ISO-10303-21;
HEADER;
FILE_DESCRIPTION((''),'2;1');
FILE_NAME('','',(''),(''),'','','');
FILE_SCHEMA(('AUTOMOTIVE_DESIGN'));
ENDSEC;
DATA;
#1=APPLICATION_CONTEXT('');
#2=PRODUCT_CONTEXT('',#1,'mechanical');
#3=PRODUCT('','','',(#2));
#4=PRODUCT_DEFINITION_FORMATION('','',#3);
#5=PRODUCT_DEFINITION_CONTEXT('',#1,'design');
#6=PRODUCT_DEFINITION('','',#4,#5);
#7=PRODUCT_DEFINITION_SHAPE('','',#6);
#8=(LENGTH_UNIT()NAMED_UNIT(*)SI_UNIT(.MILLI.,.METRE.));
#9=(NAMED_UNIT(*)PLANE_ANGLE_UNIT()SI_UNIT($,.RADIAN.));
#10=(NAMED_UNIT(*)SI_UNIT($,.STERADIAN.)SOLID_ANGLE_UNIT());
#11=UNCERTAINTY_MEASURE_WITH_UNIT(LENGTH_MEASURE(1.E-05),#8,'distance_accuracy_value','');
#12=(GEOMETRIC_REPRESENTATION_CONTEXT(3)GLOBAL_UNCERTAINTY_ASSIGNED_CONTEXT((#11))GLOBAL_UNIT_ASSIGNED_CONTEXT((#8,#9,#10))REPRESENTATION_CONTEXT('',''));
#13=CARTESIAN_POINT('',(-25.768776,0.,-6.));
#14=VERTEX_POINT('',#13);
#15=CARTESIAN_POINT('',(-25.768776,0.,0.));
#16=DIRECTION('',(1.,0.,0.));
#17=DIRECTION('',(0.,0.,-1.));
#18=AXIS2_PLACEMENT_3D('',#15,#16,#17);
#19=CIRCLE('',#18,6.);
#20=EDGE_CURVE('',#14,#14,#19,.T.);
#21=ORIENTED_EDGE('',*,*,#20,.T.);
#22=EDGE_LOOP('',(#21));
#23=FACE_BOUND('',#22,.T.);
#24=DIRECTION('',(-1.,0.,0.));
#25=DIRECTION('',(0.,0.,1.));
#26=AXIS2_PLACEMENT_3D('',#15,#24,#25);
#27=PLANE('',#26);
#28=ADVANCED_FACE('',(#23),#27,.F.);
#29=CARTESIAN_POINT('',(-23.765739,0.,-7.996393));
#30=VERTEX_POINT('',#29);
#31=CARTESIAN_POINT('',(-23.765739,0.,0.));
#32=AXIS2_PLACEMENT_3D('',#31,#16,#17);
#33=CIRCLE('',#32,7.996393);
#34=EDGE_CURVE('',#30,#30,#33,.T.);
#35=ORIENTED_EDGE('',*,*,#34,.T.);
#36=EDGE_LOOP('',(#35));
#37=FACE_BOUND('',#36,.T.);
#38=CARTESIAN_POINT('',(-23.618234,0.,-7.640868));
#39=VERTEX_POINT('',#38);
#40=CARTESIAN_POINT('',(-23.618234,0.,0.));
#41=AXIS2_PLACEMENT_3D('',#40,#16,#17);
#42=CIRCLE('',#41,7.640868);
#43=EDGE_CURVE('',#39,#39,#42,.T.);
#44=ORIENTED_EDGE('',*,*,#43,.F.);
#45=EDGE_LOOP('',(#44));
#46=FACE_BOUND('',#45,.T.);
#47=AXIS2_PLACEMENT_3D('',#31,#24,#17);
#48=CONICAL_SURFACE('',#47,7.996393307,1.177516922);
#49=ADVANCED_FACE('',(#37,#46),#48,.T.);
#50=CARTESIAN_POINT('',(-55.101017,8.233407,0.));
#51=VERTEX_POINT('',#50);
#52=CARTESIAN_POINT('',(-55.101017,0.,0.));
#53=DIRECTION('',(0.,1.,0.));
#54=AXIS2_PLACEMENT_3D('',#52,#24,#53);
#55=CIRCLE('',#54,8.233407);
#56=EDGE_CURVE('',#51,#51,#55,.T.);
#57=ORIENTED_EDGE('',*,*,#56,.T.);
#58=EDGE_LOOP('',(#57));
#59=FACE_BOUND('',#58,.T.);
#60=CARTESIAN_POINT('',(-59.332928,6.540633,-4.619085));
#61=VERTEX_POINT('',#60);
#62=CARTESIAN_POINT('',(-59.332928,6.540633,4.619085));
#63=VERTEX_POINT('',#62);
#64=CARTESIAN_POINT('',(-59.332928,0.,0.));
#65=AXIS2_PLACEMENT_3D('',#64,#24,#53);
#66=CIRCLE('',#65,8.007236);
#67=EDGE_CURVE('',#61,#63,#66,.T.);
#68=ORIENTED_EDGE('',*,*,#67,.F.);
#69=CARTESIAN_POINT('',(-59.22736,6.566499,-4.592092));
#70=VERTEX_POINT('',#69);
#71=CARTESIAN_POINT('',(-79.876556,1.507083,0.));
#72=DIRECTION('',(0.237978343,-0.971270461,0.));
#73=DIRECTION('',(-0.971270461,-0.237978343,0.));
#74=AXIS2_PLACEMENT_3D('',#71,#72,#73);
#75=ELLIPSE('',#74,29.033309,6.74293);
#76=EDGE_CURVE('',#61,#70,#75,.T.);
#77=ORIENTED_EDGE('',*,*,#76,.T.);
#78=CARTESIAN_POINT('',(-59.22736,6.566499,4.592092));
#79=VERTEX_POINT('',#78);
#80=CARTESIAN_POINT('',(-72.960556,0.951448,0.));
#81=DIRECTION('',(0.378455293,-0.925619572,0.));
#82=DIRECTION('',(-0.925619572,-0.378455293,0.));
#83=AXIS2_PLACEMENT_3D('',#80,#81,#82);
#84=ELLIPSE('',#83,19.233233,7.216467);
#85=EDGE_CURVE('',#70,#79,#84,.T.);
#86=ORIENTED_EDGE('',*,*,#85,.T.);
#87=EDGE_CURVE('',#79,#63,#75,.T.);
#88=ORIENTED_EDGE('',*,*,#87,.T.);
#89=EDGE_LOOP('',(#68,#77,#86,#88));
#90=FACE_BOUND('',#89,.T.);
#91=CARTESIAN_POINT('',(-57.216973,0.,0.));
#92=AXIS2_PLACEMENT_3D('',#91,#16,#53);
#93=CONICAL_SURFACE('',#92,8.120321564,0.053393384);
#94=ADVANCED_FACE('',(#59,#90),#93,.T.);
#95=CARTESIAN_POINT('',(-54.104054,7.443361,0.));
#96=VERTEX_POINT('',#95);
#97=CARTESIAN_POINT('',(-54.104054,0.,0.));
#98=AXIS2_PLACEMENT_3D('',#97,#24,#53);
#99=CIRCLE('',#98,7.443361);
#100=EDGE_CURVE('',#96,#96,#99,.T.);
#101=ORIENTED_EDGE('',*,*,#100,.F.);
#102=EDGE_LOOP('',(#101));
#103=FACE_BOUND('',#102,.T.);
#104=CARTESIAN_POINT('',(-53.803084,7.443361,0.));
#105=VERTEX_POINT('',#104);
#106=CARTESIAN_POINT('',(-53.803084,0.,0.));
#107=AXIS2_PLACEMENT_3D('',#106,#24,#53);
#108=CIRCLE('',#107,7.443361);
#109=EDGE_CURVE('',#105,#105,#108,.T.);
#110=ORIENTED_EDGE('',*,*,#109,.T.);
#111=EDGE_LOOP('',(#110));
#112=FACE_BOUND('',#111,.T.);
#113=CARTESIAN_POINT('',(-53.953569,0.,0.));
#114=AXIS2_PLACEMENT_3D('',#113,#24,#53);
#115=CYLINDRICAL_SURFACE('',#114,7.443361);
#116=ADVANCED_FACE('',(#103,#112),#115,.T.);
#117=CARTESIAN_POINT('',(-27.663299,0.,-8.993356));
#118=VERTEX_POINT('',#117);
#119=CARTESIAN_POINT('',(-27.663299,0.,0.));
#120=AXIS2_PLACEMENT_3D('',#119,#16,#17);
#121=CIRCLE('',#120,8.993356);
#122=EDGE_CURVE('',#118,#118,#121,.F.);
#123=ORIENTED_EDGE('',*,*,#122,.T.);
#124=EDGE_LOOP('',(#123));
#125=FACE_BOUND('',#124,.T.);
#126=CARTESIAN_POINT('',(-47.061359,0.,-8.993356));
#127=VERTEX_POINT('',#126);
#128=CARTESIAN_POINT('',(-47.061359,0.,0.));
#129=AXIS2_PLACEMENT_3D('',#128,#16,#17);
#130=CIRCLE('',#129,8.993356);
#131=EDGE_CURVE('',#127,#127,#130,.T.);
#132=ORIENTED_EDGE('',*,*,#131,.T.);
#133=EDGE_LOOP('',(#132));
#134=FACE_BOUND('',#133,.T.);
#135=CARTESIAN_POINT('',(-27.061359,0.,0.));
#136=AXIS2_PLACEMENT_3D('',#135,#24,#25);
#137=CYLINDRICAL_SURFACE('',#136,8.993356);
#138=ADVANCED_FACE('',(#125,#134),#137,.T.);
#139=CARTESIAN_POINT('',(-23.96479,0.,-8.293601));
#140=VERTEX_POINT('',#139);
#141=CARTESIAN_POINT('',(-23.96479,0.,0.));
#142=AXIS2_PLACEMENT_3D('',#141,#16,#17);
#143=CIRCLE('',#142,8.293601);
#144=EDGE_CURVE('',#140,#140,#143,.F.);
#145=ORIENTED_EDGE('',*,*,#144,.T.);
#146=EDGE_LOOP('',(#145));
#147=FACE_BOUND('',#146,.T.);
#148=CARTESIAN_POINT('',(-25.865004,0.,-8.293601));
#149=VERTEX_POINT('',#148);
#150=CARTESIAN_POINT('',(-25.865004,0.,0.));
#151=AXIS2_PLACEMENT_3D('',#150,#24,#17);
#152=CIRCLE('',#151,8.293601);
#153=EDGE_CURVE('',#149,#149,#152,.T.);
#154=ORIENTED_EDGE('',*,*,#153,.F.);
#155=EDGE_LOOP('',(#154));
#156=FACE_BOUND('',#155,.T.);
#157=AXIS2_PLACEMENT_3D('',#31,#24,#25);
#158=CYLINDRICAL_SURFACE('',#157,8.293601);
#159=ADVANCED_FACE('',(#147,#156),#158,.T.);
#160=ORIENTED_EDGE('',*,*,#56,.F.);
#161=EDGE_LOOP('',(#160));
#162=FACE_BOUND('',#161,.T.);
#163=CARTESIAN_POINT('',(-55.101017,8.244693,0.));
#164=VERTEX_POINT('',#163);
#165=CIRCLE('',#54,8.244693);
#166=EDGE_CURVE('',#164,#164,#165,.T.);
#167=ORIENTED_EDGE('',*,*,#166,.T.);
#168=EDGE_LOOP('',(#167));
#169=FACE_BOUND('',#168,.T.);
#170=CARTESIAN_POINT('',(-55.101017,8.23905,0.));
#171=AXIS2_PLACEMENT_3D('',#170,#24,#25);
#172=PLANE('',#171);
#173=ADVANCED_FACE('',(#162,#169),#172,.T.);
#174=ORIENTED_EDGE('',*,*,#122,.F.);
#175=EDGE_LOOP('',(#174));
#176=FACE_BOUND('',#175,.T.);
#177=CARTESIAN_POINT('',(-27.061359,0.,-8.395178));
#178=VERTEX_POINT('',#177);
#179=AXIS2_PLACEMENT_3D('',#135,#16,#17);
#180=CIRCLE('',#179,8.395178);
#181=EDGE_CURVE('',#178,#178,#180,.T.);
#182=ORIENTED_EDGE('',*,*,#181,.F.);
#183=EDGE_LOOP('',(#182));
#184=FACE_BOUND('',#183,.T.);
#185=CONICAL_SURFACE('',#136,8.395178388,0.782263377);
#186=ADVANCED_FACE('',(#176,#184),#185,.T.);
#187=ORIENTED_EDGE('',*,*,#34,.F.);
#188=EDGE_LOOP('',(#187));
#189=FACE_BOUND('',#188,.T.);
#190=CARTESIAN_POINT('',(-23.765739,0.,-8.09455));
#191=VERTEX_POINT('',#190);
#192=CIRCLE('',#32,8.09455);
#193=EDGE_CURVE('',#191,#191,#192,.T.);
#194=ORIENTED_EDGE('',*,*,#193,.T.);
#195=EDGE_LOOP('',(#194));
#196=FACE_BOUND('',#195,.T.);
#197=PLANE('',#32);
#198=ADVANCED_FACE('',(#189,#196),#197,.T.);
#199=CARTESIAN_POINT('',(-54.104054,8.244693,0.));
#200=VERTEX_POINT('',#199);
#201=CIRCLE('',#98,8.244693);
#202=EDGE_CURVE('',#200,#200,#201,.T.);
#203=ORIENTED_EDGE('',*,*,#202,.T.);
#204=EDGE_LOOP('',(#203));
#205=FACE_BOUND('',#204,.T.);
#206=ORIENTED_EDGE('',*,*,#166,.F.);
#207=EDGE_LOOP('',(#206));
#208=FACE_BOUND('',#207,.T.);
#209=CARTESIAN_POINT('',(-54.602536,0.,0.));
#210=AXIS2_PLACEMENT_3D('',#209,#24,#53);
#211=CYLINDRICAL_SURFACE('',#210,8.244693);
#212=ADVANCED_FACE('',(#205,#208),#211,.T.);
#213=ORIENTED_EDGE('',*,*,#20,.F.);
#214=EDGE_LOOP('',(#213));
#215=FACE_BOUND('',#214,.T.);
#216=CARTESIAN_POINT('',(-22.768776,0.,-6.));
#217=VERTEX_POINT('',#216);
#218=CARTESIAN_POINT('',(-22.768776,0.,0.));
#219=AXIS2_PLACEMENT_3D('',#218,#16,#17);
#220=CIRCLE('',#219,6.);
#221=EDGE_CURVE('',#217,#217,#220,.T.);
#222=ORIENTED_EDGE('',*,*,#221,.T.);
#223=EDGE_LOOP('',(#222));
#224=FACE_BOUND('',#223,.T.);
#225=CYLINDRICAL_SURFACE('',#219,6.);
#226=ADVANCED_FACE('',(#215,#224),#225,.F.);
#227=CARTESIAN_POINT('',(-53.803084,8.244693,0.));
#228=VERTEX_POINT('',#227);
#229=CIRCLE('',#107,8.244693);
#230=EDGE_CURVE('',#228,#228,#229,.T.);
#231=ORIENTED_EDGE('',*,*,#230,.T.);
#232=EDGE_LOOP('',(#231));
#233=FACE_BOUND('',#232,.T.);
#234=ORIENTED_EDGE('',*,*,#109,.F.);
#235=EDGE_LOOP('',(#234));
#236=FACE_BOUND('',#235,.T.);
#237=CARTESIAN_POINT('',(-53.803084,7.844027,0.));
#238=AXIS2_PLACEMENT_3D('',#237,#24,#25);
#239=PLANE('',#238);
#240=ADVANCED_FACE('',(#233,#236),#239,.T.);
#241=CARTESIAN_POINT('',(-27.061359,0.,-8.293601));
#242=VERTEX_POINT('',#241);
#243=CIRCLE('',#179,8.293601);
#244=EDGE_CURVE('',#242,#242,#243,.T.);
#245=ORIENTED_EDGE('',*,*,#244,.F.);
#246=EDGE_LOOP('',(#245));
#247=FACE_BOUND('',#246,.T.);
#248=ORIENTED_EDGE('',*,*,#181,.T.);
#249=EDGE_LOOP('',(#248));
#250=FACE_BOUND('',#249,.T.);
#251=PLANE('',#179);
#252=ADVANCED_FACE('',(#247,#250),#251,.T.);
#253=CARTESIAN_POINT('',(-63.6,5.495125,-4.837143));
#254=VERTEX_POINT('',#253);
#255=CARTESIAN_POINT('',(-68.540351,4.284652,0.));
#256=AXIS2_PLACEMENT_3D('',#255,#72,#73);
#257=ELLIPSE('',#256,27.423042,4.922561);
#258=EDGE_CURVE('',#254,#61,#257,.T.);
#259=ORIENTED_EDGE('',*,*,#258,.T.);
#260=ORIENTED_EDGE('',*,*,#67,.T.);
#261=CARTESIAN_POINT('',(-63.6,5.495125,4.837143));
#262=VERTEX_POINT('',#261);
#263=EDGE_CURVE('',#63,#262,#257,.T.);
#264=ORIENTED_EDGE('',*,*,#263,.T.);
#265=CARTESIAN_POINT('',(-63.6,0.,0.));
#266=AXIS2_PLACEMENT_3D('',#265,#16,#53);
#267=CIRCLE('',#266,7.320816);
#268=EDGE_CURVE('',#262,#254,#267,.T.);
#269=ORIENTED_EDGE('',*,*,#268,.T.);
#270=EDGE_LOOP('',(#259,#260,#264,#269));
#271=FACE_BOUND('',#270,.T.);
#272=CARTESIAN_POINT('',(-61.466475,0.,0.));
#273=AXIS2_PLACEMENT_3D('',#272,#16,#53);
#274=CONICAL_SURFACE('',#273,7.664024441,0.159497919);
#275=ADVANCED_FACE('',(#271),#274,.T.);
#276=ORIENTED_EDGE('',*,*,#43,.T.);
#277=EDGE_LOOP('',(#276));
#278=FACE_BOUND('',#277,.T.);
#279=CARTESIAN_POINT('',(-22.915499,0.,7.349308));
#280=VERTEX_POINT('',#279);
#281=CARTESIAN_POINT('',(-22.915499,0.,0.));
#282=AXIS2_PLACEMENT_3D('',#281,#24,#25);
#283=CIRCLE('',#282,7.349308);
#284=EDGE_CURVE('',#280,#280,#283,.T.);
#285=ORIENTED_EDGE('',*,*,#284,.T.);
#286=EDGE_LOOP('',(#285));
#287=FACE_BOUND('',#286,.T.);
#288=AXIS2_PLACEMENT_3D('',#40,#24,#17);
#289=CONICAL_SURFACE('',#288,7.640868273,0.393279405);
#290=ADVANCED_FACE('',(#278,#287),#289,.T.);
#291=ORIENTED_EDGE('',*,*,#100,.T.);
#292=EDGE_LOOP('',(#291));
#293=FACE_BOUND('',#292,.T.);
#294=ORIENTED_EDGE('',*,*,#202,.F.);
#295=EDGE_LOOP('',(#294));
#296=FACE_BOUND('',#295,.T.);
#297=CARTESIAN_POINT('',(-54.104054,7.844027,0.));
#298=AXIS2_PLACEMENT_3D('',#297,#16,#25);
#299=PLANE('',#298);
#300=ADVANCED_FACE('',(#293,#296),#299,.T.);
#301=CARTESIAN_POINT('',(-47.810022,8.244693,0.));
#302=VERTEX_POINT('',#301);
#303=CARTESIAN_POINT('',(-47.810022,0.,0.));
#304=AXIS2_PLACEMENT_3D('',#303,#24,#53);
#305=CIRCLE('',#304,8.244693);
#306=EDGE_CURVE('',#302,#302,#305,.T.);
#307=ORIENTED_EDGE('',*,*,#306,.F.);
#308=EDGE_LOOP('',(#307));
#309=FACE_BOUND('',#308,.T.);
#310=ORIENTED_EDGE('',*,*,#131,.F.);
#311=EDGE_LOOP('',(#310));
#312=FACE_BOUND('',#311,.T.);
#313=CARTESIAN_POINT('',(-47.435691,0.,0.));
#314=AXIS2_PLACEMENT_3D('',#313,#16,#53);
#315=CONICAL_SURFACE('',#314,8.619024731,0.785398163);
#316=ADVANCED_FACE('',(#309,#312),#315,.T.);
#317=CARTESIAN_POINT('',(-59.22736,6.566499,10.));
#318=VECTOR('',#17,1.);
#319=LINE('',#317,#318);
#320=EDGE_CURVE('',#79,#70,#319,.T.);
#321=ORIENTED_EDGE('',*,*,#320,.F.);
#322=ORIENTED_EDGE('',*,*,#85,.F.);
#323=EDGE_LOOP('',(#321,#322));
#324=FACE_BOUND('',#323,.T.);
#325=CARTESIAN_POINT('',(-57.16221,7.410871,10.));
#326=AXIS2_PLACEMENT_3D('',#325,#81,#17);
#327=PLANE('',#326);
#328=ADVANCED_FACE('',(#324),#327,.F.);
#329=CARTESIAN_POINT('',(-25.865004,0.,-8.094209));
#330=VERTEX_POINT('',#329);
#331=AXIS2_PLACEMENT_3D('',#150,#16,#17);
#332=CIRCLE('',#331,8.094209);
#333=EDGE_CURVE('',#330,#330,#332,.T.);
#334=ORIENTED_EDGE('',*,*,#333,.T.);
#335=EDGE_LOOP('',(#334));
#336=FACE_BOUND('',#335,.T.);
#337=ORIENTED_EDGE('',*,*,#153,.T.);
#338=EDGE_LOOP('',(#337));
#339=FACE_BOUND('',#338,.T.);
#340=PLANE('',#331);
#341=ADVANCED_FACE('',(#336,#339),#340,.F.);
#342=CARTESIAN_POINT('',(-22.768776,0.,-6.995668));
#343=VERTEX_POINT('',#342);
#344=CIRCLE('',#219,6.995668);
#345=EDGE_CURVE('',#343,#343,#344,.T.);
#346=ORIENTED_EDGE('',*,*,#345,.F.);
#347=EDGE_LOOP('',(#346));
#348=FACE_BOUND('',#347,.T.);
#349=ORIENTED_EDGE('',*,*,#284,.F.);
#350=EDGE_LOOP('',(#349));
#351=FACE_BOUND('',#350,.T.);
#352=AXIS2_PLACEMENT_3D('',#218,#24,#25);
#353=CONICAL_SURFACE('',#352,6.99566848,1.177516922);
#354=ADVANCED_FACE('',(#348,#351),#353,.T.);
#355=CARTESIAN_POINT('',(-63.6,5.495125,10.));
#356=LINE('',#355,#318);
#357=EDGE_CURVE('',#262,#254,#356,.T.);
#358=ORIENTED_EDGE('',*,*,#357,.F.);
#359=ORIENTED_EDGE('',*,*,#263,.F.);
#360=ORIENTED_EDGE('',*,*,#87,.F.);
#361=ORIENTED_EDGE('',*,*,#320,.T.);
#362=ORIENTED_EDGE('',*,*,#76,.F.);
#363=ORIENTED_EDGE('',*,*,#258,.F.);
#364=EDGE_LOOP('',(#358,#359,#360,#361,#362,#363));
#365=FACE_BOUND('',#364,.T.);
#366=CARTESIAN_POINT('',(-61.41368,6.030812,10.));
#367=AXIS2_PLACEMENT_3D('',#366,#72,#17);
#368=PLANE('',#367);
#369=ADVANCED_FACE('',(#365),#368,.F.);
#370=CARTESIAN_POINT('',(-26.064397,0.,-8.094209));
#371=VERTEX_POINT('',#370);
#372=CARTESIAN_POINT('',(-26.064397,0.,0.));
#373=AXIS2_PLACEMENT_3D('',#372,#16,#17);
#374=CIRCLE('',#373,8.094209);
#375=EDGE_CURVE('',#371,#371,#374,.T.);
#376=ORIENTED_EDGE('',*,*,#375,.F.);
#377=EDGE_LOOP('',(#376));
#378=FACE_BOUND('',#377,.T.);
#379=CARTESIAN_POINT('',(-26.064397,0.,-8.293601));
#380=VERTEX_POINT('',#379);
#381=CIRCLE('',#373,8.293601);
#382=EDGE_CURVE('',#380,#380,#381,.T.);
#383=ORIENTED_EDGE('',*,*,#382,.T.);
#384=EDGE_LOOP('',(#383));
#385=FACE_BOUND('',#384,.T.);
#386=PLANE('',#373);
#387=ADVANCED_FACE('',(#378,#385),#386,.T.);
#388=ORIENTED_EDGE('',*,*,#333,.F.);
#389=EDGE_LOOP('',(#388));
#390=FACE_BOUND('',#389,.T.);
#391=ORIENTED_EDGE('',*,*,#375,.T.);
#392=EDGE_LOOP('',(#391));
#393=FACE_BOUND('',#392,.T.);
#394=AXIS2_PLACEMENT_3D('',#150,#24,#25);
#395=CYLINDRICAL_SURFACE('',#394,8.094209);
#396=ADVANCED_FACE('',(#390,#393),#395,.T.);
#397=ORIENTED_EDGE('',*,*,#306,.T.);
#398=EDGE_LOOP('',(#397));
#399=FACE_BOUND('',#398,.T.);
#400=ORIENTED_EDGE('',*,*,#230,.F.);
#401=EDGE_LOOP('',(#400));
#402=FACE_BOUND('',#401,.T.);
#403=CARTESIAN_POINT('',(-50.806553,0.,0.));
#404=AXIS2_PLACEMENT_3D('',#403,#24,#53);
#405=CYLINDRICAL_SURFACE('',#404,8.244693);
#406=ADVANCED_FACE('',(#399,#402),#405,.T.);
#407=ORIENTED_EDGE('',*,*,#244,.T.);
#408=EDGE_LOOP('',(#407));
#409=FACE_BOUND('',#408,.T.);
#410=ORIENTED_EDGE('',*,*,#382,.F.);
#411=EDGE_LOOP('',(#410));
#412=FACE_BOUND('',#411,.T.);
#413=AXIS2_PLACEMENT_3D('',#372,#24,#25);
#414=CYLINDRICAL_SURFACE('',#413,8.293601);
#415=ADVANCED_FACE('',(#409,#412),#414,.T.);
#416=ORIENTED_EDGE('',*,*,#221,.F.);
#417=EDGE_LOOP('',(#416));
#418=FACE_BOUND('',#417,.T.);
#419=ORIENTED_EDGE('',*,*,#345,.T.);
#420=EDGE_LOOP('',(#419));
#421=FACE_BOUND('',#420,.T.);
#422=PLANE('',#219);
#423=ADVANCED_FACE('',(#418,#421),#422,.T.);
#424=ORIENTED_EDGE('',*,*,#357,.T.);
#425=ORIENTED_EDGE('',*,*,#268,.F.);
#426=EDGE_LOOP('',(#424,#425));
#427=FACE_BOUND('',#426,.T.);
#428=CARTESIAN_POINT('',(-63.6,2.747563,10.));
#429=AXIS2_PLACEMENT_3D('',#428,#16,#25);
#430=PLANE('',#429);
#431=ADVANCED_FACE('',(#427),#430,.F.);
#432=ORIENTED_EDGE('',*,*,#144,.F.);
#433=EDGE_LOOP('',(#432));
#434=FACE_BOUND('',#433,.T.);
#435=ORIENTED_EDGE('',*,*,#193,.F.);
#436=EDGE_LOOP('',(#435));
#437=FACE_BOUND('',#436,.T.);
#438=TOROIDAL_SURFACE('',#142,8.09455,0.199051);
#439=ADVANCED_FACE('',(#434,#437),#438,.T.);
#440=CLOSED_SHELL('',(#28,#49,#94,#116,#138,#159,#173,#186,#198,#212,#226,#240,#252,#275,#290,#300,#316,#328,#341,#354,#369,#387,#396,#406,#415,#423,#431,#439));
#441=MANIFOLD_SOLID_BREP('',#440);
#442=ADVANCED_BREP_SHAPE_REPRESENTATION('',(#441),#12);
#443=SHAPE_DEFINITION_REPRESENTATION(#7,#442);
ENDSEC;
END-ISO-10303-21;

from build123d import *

# Parameters (mm, degrees)
SALIENTE_EXTRUIR1_START             = -7.320816359
SALIENTE_EXTRUIR1_3_DEPTH           = 14.641632718
CROQUIS2_R                          = 8.293601056
SALIENTE_EXTRUIR2_DEPTH             = 0.996962704
CROQUIS3_R                          = 8.094208515
SALIENTE_EXTRUIR3_DEPTH             = 0.199392541
CROQUIS4_R                          = 8.293601056
SALIENTE_EXTRUIR4_DEPTH             = 2.099264862
CROQUIS6_R                          = 7.996393307
SALIENTE_EXTRUIR6_DEPTH             = 0.147505067
SALIENTE_EXTRUIR6_TAPER             = 67.466749921
CROQUIS7_R                          = 7.640868273
SALIENTE_EXTRUIR7_DEPTH             = 0.849457636
SALIENTE_EXTRUIR7_TAPER             = 22.533250079
DI_METRO_DE_TALADRO_12_0_12_1_D     = 12
DI_METRO_DE_TALADRO_12_0_12_1_DEPTH = 3
CHAFL_N1_SIZE                       = 0.598177622
CHAFL_N1_SIZE2                      = 0.601939746
CHAFL_N2_SIZE                       = 0.158849839
CHAFL_N2_SIZE_2                     = 0.292765242
REDONDEO1_R                         = 0.199050823


with BuildPart() as part:
    # Saliente-Extruir1: read off the stored shape, not the designer's step
    # Saliente-Extruir1 outline → Saliente-Extruir1 (revolve)
    with BuildSketch(Plane.YX):
        Polygon((8.99335601, -27.061359261), (0, -27.061359261), (0, -55.101016987), (8.244693452, -55.101016987), (8.244693452, -54.104054283), (7.443361166, -54.104054283), (7.443361166, -53.803084411), (8.244693452, -53.803084411), (8.244693452, -47.810021819), (8.99335601, -47.061359261), align=None)
    revolve(axis=Axis((0, 0, 0), (1, 0, 0)))

    # Saliente-Extruir1 2 outline → Saliente-Extruir1 2 (revolve)
    with BuildSketch(Plane.YX):
        Polygon((0, -55.101016987), (0, -63.6), (7.320816359, -63.6), (8.007236046, -59.33292836), (8.233407082, -55.101016987), align=None)
    revolve(axis=Axis((0, 0, 0), (1, 0, 0)))

    # Saliente-Extruir1 3 outline → Saliente-Extruir1 3 (cut)
    with BuildSketch(Plane.XY.offset(SALIENTE_EXTRUIR1_START)):
        Polygon((-63.6, 5.495125364), (-59.227359982, 6.566499061), (-55.157899775, 8.230367028), (-54, 8.70379403), (-54, 10), (-63.6, 10), align=None)
    extrude(amount=SALIENTE_EXTRUIR1_3_DEPTH, mode=Mode.SUBTRACT)

    # Croquis2 → Saliente-Extruir2 (add)
    with BuildSketch(Plane(origin=(-27.061359261, 0, 0), x_dir=(0, 0, -1), z_dir=(1, 0, 0))):
        Circle(CROQUIS2_R)
    extrude(amount=SALIENTE_EXTRUIR2_DEPTH)

    # Croquis3 → Saliente-Extruir3 (add)
    with BuildSketch(Plane(origin=(-26.064396557, 0, 0), x_dir=(0, 0, -1), z_dir=(1, 0, 0))):
        Circle(CROQUIS3_R)
    extrude(amount=SALIENTE_EXTRUIR3_DEPTH)

    # Croquis4 → Saliente-Extruir4 (add)
    with BuildSketch(Plane(origin=(-25.865004017, 0, 0), x_dir=(0, -1, 0), z_dir=(-1, 0, 0))):
        with Locations(Location((0, 0, 0), (0, 0, 270))):
            Circle(CROQUIS4_R)
    extrude(amount=-SALIENTE_EXTRUIR4_DEPTH)

    # Croquis6 → Saliente-Extruir6 (add)
    with BuildSketch(Plane(origin=(-23.765739154, 0, 0), x_dir=(0, 0, -1), z_dir=(1, 0, 0))):
        Circle(CROQUIS6_R)
    extrude(amount=SALIENTE_EXTRUIR6_DEPTH, taper=SALIENTE_EXTRUIR6_TAPER)

    # Croquis7 → Saliente-Extruir7 (add)
    with BuildSketch(Plane(origin=(-23.618234087, 0, 0), x_dir=(0, 0, -1), z_dir=(1, 0, 0))):
        Circle(CROQUIS7_R)
    extrude(amount=SALIENTE_EXTRUIR7_DEPTH, taper=SALIENTE_EXTRUIR7_TAPER)

    # Diámetro de taladro Ø12.0 (12)1
    with Locations(Plane(origin=(-22.768776451, 0, 0), x_dir=(0, 0, -1), z_dir=(1, 0, 0))):
        with Locations((0, 0)):
            Hole(DI_METRO_DE_TALADRO_12_0_12_1_D / 2, depth=DI_METRO_DE_TALADRO_12_0_12_1_DEPTH)

    # Chaflán1
    chafl_n1_edges = [part.edges().sort_by_distance(p)[0] for p in [
        (-27.061359261, -8.99335601, 0),
    ]]
    chafl_n1_side = [part.faces().sort_by_distance(p)[0] for p in [
        (-27.061359261, -8.738985489, 0),
    ]]
    chamfer(chafl_n1_edges, length=CHAFL_N1_SIZE, length2=CHAFL_N1_SIZE2, reference=chafl_n1_side[0])

    # Chaflán2
    # the kernel refuses this chamfer: 0.292765242, 0.158849839 mm, written as the material it takes off along each edge
    with BuildSketch(Plane(origin=(-22.768776451, 0, 0), x_dir=(0, 0, -1), z_dir=(0, 1, 0))) as chafl_n2_piece_1:
        Polygon((7.288433722 + CHAFL_N2_SIZE * 0.38321951697, CHAFL_N2_SIZE * 0.923657297312), (7.288433722 - CHAFL_N2_SIZE_2, 0), (7.288433722, 0), align=None)
    revolve(axis=Axis((-22.768776451, 0, 0), (-1, 0, 0)), mode=Mode.SUBTRACT)

    # Redondeo1
    redondeo1_edges = [part.edges().sort_by_distance(p)[0] for p in [
        (-23.765739154, 0, 8.293601056),
    ]]
    fillet(redondeo1_edges, radius=REDONDEO1_R)


solid = part.part
